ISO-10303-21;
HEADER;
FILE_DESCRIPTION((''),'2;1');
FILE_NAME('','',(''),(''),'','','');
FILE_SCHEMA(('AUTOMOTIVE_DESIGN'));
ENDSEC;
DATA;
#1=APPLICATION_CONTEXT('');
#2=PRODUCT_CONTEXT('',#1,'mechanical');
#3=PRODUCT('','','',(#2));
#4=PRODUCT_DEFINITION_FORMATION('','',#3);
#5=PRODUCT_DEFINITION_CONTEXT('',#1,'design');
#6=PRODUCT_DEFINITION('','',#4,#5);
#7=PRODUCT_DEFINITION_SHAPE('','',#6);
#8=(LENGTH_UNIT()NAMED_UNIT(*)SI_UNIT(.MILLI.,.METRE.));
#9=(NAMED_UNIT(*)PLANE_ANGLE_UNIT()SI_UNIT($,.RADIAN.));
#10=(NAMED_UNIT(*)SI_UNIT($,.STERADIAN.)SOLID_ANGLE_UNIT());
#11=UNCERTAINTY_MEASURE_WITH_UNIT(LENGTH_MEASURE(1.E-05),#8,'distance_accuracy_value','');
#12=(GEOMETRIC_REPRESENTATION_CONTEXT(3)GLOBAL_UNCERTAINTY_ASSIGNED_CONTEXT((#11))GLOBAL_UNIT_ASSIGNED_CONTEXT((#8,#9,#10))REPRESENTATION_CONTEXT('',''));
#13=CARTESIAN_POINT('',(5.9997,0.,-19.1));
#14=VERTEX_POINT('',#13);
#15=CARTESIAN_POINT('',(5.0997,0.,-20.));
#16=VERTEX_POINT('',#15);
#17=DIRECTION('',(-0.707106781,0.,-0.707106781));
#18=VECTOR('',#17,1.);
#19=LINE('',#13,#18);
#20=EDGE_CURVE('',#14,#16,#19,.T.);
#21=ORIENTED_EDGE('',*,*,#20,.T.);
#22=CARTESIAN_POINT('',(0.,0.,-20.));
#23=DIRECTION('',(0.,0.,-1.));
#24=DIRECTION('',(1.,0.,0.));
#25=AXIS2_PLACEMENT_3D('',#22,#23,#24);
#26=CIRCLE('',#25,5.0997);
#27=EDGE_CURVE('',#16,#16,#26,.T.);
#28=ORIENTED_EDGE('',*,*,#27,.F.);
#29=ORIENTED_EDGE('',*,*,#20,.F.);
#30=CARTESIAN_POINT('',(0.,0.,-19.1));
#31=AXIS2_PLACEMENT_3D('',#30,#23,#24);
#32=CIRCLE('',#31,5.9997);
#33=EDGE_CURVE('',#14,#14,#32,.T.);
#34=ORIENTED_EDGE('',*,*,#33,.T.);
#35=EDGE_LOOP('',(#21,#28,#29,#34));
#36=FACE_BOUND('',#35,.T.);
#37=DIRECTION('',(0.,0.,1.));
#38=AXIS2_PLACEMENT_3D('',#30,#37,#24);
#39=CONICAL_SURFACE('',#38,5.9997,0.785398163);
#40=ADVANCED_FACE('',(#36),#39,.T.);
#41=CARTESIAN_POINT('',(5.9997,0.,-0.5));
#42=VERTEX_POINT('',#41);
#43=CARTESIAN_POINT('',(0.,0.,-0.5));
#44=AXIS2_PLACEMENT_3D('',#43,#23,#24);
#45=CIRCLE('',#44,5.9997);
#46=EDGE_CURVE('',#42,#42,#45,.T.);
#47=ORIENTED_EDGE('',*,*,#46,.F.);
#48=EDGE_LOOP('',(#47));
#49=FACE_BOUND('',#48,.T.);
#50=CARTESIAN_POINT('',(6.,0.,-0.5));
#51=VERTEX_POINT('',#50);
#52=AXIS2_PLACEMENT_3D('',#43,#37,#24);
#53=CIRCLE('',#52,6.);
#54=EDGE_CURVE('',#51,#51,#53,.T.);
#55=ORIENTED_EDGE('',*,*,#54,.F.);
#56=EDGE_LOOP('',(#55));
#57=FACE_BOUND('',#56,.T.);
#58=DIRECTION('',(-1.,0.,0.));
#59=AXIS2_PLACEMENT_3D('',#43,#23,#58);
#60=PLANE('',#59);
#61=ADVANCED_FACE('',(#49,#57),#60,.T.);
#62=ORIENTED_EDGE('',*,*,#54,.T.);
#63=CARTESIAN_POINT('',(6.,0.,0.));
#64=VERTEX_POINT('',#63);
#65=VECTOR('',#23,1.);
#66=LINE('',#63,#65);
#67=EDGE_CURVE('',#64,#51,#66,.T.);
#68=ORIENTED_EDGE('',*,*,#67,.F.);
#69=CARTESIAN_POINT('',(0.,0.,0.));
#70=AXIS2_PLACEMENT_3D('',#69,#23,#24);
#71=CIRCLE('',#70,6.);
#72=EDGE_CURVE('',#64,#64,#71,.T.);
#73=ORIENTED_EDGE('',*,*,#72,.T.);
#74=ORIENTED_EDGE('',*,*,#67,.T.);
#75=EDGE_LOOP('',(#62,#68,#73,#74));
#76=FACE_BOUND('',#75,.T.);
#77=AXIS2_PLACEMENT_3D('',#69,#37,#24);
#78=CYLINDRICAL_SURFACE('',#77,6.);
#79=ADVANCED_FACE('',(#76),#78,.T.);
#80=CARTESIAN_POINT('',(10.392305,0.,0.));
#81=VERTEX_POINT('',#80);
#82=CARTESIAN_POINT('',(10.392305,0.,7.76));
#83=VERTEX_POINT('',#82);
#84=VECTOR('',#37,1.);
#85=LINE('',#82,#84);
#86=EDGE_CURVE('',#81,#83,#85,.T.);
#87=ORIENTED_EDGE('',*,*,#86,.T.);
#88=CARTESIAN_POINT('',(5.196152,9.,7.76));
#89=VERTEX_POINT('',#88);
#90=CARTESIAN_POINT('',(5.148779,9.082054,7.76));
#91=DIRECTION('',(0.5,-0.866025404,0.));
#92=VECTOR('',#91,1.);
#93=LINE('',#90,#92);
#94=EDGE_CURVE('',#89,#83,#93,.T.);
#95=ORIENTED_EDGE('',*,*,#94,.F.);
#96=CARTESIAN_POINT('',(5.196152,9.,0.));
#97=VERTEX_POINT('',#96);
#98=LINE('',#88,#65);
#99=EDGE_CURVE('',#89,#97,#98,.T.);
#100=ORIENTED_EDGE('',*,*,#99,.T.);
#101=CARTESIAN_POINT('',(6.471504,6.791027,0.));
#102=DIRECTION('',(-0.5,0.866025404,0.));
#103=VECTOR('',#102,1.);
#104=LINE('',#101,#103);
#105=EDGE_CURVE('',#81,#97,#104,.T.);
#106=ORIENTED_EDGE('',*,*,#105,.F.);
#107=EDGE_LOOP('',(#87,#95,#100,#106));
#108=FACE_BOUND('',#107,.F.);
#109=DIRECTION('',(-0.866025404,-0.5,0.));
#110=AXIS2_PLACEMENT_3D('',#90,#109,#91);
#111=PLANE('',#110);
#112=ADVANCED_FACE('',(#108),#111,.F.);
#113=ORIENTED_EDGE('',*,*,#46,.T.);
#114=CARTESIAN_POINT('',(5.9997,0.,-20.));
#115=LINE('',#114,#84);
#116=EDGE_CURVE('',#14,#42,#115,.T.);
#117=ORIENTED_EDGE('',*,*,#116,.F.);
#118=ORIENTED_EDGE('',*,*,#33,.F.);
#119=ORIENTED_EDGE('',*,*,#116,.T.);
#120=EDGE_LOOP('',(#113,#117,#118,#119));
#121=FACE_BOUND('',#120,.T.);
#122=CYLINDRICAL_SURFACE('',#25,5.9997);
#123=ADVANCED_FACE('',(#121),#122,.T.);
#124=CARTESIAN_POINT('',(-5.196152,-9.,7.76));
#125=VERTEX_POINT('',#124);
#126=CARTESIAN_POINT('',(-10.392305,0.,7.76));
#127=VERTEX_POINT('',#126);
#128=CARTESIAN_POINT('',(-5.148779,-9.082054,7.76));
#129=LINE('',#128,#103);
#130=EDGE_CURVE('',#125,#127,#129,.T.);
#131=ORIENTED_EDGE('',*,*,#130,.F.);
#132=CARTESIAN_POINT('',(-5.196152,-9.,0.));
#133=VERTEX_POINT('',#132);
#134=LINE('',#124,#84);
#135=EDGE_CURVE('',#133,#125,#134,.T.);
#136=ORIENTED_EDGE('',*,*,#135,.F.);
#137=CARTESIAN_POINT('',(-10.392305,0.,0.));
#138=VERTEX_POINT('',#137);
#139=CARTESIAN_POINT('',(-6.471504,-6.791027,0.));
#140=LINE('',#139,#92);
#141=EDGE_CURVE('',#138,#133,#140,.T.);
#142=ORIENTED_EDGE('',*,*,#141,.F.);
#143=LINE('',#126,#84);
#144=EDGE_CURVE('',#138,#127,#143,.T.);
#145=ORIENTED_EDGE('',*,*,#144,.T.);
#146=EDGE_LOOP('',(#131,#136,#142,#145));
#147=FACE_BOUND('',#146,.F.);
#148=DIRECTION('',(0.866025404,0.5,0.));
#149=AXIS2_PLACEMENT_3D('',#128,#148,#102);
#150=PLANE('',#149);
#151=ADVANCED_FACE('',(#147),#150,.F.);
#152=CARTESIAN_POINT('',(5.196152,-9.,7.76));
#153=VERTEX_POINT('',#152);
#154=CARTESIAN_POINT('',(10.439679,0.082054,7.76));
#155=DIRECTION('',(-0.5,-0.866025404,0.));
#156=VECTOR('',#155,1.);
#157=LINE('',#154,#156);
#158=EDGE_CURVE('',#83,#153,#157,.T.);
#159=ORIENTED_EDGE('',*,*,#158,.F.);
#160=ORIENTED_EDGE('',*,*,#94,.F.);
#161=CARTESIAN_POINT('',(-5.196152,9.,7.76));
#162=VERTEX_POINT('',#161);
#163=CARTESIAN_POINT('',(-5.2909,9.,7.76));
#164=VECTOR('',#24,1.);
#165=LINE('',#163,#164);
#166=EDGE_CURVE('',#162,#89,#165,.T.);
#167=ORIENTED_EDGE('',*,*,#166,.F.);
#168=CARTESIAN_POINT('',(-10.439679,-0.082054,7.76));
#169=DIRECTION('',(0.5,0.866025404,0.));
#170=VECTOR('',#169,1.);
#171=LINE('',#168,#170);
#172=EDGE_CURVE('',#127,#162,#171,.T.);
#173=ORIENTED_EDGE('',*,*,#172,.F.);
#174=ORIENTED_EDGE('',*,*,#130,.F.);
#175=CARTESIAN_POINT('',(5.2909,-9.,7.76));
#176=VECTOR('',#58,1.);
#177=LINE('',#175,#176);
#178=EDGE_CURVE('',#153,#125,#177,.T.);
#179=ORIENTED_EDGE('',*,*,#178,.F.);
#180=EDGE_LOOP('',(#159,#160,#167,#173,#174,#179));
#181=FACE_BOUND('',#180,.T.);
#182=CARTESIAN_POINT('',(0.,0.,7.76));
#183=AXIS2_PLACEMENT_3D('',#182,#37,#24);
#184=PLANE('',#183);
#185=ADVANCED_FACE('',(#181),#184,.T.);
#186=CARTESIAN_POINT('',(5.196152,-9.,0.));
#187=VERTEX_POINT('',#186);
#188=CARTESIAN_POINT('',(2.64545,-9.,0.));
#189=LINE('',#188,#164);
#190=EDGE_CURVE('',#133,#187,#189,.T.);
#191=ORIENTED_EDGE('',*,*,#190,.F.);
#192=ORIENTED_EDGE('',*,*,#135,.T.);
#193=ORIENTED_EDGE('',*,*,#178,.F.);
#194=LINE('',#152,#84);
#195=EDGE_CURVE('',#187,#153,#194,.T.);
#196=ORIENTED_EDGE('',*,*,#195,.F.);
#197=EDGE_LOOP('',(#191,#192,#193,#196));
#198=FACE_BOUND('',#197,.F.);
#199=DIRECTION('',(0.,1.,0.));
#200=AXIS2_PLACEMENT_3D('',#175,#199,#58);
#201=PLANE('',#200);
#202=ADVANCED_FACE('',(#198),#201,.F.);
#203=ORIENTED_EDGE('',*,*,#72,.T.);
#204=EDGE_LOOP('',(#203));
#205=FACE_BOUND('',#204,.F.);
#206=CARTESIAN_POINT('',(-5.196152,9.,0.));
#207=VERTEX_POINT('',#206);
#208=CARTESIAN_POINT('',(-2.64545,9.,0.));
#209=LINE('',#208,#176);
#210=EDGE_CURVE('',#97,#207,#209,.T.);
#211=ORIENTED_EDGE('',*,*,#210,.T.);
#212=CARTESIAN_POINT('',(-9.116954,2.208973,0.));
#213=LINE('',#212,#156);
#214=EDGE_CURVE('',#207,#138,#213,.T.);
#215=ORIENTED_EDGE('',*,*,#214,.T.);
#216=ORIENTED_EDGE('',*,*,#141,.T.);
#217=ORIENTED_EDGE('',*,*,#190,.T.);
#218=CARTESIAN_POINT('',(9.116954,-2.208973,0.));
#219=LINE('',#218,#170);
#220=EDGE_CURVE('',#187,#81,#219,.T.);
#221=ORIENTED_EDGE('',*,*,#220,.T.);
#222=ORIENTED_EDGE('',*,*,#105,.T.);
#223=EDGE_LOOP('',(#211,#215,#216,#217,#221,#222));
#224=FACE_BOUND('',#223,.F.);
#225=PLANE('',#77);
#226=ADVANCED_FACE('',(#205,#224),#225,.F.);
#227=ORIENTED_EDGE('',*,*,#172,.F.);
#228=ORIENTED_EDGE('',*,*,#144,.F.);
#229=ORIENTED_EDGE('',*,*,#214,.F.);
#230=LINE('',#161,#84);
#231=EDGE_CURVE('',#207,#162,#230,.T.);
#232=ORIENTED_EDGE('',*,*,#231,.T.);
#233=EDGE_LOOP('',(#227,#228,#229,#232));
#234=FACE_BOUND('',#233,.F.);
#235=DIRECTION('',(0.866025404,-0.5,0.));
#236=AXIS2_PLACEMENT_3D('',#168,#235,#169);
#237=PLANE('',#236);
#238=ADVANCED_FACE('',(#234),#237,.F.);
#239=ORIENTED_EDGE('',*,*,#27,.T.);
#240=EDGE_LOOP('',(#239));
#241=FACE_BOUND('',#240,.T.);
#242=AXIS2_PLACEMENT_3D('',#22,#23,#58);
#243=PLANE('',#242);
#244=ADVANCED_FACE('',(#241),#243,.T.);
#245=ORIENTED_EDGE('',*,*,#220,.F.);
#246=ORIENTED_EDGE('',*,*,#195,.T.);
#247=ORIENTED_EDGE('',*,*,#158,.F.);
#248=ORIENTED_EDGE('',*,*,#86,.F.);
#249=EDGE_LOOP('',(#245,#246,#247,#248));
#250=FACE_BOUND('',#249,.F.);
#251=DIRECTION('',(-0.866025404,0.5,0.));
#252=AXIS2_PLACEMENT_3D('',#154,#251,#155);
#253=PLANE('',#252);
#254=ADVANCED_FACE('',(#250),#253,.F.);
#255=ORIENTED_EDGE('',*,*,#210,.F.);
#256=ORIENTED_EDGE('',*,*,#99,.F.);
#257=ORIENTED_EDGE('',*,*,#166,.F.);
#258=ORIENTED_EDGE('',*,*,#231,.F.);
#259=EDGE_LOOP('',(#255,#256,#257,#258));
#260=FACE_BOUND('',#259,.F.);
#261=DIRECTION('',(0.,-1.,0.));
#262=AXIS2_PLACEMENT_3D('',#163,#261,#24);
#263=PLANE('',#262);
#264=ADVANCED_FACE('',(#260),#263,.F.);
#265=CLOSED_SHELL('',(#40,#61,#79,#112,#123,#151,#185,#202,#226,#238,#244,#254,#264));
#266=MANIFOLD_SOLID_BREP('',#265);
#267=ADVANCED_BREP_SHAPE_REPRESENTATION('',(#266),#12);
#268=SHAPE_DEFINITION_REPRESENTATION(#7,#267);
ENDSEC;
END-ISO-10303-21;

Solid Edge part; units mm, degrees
sketch "Sketch1" plane through (0, 0, 0) normal (0, 0, 1) x (1, 0, 0)
  circle A0 centre (0, 0) radius 10.44
  dimension "D1" = 20.88
extrude "Protrusion1" add sketch "Sketch1" along normal blind 7.76
sketch "Sketch2" plane through (0, 0, 0) normal (0, 0, -1) x (1, 0, 0)
  circle A0 centre (0, 0) radius 6
extrude "Protrusion2" add sketch "Sketch2" along normal blind 20
sketch "Sketch3" plane through (0, 0, -20) normal (0, 0, -1) x (1, 0, 0)
  circle A0 centre (0, 0) radius 5.9997
extrude "Cutout1" cut sketch "Sketch3" against normal blind 19.5 flip side to cut
chamfer "Chamfer_1" distance 0.9 angle 45 1 edges at (-5.9997, 0, -20)
sketch "Sketch4" plane through (0, 0, 7.76) normal (0, 0, 1) x (1, 0, 0)
  line L0 (-5.2909, 9) -> (5.2909, 9)
  dimension "D1" = 18
extrude "Cutout2" cut sketch "Sketch4" against normal up to next material side at (0, 9.05, 7.76)
pattern_circular "Pattern1" count 6 over 360 about axis through (0, 0, 7.76) along (0, 0, 1) of "Cutout2"
properties part number "24104509"
